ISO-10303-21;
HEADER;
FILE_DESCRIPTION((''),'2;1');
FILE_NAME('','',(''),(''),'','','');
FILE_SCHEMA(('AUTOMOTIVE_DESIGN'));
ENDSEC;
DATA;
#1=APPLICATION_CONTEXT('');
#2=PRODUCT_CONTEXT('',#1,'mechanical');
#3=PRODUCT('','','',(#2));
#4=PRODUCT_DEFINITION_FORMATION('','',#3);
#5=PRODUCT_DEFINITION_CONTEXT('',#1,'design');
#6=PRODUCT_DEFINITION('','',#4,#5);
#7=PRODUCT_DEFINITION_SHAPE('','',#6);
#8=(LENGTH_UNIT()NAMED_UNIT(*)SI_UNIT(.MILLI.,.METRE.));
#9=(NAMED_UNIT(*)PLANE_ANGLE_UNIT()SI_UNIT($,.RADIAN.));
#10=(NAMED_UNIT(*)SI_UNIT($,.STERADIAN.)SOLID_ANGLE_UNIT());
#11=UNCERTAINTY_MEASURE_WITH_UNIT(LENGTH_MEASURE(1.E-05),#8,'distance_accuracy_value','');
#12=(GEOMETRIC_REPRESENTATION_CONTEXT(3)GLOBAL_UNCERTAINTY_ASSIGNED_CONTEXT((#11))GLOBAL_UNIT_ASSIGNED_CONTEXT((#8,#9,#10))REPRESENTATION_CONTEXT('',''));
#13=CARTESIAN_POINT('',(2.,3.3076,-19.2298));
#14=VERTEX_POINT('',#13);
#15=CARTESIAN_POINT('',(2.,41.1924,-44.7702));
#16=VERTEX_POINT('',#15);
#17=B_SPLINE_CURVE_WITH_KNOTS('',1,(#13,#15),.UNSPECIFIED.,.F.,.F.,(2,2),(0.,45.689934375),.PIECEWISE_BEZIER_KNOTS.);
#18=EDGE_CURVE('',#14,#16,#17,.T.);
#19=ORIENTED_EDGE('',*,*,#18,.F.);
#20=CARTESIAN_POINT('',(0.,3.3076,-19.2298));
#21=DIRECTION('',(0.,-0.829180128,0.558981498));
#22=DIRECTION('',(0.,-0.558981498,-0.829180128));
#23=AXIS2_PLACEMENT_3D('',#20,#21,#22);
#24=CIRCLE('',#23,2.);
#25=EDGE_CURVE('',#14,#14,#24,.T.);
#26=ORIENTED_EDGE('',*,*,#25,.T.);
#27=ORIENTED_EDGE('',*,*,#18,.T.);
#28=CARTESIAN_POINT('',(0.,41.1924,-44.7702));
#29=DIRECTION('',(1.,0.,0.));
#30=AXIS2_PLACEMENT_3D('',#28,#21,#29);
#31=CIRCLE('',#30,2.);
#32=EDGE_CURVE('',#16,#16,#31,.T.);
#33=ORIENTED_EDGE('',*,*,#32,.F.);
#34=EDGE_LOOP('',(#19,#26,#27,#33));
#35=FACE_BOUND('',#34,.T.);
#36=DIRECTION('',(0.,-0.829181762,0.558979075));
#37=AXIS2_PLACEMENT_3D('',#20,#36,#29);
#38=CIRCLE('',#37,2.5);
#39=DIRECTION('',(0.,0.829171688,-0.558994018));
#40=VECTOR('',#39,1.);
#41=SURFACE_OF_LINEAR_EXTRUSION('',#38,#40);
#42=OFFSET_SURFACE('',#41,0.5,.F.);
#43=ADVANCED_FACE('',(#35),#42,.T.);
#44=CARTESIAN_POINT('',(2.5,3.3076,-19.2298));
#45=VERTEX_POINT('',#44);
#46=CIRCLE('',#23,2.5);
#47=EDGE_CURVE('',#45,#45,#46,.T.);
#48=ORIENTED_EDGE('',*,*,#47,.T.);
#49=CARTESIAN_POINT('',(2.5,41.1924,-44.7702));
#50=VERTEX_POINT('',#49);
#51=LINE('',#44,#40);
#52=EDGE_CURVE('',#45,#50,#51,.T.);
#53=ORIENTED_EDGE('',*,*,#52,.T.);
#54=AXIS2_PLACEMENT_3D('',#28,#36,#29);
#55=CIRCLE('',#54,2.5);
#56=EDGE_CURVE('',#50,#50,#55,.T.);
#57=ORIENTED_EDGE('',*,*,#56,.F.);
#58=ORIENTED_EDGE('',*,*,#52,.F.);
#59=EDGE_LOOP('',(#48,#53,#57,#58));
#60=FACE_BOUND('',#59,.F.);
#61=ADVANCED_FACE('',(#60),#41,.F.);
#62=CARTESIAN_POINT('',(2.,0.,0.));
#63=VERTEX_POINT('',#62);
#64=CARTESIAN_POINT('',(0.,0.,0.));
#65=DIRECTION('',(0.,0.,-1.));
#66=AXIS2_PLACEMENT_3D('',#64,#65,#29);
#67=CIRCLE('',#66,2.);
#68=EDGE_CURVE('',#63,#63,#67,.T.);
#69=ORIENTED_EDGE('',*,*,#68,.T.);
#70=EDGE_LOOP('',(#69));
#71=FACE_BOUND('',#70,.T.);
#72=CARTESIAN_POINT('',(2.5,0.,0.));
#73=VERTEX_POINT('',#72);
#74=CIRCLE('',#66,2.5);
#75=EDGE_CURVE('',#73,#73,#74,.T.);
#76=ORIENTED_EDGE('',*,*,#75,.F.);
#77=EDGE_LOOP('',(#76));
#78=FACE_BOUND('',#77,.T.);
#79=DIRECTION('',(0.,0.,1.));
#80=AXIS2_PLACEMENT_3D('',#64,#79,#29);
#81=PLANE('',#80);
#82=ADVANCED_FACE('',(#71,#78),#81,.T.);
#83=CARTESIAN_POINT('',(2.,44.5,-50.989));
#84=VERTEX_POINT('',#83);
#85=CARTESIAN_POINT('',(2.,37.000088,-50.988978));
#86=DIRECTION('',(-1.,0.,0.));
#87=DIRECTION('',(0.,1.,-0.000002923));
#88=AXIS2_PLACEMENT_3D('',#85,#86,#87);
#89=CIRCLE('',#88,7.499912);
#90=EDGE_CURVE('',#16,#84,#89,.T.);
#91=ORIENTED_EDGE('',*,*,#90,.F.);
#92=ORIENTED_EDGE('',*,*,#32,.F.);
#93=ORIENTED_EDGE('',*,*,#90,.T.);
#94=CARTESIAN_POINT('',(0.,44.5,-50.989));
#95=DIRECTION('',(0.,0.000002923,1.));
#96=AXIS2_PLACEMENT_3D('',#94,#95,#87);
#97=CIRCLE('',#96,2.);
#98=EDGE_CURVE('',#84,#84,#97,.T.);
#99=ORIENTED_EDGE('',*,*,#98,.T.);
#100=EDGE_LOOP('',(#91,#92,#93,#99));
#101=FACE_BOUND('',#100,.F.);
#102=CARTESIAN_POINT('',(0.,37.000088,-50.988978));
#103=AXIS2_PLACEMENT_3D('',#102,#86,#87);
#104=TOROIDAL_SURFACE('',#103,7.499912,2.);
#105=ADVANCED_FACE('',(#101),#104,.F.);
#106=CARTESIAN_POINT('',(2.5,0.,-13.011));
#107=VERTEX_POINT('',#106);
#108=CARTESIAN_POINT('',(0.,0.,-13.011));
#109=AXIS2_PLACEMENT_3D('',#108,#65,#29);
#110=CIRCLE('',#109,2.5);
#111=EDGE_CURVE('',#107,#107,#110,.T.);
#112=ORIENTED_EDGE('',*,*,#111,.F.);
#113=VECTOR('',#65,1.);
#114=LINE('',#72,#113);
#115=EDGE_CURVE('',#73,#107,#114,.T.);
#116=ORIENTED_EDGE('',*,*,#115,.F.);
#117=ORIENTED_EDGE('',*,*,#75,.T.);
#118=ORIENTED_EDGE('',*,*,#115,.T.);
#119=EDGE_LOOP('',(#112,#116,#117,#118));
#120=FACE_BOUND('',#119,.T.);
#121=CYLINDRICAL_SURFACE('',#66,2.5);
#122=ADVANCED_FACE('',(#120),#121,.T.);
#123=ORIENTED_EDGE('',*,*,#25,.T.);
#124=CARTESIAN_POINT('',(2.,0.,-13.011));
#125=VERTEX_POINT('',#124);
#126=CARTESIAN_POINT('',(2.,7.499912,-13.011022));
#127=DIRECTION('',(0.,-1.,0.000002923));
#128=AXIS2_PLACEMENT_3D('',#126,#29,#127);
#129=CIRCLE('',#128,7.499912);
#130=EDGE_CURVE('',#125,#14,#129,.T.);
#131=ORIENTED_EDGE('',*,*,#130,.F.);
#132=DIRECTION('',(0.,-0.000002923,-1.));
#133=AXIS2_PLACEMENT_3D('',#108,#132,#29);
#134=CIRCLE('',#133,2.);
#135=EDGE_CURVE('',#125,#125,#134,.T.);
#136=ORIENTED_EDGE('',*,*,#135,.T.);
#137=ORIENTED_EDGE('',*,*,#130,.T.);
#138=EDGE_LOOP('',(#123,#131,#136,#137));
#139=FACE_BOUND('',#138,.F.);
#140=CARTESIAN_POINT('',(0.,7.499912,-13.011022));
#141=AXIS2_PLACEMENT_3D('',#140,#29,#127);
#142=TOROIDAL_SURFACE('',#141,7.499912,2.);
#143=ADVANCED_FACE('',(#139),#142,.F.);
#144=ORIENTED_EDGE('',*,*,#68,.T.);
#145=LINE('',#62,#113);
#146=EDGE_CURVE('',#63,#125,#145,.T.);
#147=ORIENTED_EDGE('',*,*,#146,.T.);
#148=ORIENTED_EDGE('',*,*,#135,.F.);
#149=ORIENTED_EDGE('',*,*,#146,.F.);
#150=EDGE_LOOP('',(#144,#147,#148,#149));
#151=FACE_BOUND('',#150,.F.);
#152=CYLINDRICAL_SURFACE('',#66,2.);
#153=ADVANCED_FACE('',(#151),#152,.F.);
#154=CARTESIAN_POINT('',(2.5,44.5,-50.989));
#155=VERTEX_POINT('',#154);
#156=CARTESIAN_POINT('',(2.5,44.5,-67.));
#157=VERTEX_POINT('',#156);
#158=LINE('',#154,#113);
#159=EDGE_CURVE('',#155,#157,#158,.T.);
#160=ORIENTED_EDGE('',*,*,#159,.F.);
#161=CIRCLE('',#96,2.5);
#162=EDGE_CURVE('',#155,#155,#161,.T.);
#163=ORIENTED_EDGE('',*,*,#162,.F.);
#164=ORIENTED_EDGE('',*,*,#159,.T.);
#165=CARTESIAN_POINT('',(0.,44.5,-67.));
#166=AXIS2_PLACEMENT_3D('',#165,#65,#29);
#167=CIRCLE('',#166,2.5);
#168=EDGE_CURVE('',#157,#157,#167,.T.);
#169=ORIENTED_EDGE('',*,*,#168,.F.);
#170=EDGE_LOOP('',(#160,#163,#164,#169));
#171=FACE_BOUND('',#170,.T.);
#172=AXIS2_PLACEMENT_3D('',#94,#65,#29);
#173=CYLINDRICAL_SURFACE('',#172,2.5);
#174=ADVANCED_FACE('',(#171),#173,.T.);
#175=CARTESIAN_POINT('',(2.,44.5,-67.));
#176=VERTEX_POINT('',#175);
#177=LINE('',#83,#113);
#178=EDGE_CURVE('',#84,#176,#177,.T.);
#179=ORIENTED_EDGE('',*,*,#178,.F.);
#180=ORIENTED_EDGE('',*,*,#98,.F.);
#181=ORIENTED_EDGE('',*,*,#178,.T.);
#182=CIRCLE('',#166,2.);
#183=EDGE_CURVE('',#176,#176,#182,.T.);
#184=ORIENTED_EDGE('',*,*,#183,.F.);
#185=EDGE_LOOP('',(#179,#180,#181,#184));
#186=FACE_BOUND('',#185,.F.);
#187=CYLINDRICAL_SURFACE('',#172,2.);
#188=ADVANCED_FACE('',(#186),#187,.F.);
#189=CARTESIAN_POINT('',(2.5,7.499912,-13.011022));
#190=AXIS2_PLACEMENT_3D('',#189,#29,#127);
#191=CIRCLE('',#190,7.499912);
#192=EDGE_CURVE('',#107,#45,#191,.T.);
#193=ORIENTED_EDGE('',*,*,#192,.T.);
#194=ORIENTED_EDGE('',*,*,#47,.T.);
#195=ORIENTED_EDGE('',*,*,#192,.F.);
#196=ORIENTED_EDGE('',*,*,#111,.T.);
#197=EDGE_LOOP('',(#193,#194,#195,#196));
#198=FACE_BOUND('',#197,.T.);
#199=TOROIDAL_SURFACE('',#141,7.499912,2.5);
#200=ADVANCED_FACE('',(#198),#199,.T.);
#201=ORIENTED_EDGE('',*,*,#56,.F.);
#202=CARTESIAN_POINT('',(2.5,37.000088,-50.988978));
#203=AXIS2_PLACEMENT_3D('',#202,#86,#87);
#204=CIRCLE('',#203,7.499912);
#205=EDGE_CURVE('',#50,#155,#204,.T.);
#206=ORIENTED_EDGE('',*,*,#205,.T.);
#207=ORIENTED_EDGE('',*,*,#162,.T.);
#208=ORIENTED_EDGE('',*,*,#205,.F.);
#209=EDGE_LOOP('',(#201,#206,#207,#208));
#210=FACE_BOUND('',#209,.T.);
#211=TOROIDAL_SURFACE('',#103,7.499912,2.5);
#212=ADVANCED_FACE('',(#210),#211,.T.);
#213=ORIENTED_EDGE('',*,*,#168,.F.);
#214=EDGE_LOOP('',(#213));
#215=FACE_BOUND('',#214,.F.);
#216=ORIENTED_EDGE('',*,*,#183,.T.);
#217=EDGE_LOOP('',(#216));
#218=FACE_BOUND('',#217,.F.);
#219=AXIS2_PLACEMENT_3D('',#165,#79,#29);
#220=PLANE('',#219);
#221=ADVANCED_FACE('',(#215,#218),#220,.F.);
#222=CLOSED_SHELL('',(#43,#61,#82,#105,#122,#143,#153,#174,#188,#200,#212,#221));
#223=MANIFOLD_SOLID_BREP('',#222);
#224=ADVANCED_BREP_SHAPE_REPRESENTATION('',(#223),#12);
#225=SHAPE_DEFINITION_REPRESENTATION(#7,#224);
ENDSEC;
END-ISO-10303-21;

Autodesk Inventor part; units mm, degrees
ref_plane "YZ Plane" through (0, 0, 0) normal (1, 0, 0) x (0, 1, 0)
ref_plane "XZ Plane" through (0, 0, 0) normal (0, 1, 0) x (-1, 0, 0)
ref_plane "XY Plane" through (0, 0, 0) normal (0, 0, 1) x (1, 0, 0)
sketch "Sketch1" plane through (0, 0, 0) normal (0, 0, 1) x (1, 0, 0)
  circle A0 centre (0, 0) radius 2.5
  dimension "d0" = 5
sketch "Sketch3" plane through (0, 0, 0) normal (1, 0, 0) x (0, 1, 0)
  line L0 (0, 0) -> (0, -13.011)
  line L1 (3.3076, -19.2298) -> (41.1924, -44.7702)
  line L2 (44.5, -50.989) -> (44.5, -67)
  arc A0 (0, -13.011) -> (3.3076, -19.2298) centre (7.5, -13.011) ccw
  arc A1 (44.5, -50.989) -> (41.1924, -44.7702) centre (37, -50.989) ccw
  point P0 (0, -17)
  point P1 (44.5, -47)
  dimension "d1" = 17
  dimension "d2" = 30
  dimension "d3" = 44.5
  dimension "d4" = 20
  dimension "d5" = 7.5
sweep "Sweep1" add profiles "Sketch1" path "Sketch3"
shell "Shell1" thickness 0.5 removed faces 2 at (1.2757, -0.3919, 0) at (0.6238, 43.9474, -67)
properties part number "158" material "Iron, Gray"
